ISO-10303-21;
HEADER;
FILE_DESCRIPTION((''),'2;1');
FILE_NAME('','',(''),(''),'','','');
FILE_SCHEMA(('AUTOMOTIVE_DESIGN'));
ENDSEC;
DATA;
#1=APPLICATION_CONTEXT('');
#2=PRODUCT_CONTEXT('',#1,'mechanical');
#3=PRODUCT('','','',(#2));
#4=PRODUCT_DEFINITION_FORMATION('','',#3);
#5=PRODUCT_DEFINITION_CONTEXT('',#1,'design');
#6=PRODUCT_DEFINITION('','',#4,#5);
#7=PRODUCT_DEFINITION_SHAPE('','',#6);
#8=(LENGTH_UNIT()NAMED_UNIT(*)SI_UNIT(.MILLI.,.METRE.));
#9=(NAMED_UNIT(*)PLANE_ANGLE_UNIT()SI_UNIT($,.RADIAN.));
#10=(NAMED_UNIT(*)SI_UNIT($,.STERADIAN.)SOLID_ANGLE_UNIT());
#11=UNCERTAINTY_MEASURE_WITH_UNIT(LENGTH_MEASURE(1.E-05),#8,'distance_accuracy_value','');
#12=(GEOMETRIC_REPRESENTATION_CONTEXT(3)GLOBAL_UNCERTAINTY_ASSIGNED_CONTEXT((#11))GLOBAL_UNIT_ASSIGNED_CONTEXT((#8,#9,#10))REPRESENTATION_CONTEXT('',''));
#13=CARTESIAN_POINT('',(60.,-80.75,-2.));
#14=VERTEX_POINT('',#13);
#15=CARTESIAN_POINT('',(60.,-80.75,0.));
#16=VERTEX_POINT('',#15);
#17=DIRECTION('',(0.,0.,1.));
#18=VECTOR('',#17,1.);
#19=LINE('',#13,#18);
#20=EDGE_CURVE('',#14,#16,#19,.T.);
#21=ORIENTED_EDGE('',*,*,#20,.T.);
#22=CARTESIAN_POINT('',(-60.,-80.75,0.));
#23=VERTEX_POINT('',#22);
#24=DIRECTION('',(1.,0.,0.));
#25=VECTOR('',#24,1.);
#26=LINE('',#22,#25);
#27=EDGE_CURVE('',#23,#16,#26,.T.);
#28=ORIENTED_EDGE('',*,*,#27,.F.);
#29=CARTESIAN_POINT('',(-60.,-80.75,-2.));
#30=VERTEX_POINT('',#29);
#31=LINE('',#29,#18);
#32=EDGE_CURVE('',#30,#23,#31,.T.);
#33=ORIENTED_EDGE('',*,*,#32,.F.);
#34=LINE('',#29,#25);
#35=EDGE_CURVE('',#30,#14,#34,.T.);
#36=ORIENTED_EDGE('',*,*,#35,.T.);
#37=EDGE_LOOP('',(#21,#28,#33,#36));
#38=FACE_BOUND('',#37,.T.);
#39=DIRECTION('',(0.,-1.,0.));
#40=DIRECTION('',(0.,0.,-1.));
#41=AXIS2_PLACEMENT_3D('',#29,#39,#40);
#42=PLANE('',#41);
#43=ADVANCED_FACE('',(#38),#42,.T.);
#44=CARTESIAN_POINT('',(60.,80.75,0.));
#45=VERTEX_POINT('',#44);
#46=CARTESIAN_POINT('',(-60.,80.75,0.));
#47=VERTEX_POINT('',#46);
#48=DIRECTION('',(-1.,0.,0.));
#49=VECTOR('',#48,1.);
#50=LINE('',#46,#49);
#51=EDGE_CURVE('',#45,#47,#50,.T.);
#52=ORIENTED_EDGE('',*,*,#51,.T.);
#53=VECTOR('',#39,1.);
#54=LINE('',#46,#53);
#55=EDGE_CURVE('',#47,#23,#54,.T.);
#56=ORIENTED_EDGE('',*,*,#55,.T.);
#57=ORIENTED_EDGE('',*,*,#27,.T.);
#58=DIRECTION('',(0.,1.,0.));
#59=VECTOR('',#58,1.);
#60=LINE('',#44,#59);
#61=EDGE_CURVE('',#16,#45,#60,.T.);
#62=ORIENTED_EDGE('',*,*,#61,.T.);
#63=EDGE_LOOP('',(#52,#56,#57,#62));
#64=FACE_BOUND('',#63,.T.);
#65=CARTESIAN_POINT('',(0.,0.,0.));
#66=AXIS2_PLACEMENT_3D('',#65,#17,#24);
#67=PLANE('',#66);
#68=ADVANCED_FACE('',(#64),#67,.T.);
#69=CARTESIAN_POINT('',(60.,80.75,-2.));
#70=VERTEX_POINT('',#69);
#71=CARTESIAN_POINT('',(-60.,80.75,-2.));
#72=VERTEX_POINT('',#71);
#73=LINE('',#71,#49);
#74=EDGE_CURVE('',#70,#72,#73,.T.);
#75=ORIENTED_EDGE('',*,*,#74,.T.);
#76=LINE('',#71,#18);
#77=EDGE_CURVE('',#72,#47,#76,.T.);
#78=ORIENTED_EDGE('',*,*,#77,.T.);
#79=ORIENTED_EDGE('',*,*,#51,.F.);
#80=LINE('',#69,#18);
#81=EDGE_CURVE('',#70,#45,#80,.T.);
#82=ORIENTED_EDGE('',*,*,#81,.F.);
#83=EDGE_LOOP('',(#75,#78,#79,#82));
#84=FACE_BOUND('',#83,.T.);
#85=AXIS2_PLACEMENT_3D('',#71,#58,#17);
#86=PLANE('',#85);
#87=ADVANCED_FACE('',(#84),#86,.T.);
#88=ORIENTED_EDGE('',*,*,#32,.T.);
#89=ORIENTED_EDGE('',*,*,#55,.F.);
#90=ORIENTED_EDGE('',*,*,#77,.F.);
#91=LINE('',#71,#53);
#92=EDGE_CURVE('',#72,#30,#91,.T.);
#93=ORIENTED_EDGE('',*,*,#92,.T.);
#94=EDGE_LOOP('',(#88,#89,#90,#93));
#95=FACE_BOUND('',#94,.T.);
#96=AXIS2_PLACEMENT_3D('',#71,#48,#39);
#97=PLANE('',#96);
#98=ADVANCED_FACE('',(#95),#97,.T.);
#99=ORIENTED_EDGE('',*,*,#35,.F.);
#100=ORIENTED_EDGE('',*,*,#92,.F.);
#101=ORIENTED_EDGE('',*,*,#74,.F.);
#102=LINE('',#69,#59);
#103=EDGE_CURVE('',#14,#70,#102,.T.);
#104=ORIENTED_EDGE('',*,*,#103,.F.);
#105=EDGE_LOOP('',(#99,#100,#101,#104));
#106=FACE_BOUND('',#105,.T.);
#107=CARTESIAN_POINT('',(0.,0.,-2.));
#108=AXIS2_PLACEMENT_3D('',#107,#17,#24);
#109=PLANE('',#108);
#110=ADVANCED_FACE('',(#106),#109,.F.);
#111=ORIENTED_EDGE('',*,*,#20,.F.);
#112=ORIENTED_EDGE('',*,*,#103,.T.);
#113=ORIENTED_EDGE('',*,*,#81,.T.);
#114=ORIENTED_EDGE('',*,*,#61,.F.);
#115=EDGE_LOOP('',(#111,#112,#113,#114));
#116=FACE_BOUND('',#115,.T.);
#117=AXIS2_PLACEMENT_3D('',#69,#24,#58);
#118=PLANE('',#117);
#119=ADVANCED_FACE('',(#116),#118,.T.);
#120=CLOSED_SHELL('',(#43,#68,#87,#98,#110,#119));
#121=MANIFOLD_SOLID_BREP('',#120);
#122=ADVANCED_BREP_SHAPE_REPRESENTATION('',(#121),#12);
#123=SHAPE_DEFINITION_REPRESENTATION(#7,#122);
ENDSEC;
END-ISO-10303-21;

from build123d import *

# Parameters (mm, degrees)
SKETCH_1_W             = 120
SKETCH_1_H             = 161.5
SM_BASE_FLANGE_1_DEPTH = 2


# Sheet-metal steps are written as plain solids
with BuildPart() as part:
    # Sketch 1 → 基体-法兰1 (new body)
    with BuildSketch(Plane.XY):
        Rectangle(SKETCH_1_W, SKETCH_1_H)
    extrude(amount=-SM_BASE_FLANGE_1_DEPTH)


solid = part.part
